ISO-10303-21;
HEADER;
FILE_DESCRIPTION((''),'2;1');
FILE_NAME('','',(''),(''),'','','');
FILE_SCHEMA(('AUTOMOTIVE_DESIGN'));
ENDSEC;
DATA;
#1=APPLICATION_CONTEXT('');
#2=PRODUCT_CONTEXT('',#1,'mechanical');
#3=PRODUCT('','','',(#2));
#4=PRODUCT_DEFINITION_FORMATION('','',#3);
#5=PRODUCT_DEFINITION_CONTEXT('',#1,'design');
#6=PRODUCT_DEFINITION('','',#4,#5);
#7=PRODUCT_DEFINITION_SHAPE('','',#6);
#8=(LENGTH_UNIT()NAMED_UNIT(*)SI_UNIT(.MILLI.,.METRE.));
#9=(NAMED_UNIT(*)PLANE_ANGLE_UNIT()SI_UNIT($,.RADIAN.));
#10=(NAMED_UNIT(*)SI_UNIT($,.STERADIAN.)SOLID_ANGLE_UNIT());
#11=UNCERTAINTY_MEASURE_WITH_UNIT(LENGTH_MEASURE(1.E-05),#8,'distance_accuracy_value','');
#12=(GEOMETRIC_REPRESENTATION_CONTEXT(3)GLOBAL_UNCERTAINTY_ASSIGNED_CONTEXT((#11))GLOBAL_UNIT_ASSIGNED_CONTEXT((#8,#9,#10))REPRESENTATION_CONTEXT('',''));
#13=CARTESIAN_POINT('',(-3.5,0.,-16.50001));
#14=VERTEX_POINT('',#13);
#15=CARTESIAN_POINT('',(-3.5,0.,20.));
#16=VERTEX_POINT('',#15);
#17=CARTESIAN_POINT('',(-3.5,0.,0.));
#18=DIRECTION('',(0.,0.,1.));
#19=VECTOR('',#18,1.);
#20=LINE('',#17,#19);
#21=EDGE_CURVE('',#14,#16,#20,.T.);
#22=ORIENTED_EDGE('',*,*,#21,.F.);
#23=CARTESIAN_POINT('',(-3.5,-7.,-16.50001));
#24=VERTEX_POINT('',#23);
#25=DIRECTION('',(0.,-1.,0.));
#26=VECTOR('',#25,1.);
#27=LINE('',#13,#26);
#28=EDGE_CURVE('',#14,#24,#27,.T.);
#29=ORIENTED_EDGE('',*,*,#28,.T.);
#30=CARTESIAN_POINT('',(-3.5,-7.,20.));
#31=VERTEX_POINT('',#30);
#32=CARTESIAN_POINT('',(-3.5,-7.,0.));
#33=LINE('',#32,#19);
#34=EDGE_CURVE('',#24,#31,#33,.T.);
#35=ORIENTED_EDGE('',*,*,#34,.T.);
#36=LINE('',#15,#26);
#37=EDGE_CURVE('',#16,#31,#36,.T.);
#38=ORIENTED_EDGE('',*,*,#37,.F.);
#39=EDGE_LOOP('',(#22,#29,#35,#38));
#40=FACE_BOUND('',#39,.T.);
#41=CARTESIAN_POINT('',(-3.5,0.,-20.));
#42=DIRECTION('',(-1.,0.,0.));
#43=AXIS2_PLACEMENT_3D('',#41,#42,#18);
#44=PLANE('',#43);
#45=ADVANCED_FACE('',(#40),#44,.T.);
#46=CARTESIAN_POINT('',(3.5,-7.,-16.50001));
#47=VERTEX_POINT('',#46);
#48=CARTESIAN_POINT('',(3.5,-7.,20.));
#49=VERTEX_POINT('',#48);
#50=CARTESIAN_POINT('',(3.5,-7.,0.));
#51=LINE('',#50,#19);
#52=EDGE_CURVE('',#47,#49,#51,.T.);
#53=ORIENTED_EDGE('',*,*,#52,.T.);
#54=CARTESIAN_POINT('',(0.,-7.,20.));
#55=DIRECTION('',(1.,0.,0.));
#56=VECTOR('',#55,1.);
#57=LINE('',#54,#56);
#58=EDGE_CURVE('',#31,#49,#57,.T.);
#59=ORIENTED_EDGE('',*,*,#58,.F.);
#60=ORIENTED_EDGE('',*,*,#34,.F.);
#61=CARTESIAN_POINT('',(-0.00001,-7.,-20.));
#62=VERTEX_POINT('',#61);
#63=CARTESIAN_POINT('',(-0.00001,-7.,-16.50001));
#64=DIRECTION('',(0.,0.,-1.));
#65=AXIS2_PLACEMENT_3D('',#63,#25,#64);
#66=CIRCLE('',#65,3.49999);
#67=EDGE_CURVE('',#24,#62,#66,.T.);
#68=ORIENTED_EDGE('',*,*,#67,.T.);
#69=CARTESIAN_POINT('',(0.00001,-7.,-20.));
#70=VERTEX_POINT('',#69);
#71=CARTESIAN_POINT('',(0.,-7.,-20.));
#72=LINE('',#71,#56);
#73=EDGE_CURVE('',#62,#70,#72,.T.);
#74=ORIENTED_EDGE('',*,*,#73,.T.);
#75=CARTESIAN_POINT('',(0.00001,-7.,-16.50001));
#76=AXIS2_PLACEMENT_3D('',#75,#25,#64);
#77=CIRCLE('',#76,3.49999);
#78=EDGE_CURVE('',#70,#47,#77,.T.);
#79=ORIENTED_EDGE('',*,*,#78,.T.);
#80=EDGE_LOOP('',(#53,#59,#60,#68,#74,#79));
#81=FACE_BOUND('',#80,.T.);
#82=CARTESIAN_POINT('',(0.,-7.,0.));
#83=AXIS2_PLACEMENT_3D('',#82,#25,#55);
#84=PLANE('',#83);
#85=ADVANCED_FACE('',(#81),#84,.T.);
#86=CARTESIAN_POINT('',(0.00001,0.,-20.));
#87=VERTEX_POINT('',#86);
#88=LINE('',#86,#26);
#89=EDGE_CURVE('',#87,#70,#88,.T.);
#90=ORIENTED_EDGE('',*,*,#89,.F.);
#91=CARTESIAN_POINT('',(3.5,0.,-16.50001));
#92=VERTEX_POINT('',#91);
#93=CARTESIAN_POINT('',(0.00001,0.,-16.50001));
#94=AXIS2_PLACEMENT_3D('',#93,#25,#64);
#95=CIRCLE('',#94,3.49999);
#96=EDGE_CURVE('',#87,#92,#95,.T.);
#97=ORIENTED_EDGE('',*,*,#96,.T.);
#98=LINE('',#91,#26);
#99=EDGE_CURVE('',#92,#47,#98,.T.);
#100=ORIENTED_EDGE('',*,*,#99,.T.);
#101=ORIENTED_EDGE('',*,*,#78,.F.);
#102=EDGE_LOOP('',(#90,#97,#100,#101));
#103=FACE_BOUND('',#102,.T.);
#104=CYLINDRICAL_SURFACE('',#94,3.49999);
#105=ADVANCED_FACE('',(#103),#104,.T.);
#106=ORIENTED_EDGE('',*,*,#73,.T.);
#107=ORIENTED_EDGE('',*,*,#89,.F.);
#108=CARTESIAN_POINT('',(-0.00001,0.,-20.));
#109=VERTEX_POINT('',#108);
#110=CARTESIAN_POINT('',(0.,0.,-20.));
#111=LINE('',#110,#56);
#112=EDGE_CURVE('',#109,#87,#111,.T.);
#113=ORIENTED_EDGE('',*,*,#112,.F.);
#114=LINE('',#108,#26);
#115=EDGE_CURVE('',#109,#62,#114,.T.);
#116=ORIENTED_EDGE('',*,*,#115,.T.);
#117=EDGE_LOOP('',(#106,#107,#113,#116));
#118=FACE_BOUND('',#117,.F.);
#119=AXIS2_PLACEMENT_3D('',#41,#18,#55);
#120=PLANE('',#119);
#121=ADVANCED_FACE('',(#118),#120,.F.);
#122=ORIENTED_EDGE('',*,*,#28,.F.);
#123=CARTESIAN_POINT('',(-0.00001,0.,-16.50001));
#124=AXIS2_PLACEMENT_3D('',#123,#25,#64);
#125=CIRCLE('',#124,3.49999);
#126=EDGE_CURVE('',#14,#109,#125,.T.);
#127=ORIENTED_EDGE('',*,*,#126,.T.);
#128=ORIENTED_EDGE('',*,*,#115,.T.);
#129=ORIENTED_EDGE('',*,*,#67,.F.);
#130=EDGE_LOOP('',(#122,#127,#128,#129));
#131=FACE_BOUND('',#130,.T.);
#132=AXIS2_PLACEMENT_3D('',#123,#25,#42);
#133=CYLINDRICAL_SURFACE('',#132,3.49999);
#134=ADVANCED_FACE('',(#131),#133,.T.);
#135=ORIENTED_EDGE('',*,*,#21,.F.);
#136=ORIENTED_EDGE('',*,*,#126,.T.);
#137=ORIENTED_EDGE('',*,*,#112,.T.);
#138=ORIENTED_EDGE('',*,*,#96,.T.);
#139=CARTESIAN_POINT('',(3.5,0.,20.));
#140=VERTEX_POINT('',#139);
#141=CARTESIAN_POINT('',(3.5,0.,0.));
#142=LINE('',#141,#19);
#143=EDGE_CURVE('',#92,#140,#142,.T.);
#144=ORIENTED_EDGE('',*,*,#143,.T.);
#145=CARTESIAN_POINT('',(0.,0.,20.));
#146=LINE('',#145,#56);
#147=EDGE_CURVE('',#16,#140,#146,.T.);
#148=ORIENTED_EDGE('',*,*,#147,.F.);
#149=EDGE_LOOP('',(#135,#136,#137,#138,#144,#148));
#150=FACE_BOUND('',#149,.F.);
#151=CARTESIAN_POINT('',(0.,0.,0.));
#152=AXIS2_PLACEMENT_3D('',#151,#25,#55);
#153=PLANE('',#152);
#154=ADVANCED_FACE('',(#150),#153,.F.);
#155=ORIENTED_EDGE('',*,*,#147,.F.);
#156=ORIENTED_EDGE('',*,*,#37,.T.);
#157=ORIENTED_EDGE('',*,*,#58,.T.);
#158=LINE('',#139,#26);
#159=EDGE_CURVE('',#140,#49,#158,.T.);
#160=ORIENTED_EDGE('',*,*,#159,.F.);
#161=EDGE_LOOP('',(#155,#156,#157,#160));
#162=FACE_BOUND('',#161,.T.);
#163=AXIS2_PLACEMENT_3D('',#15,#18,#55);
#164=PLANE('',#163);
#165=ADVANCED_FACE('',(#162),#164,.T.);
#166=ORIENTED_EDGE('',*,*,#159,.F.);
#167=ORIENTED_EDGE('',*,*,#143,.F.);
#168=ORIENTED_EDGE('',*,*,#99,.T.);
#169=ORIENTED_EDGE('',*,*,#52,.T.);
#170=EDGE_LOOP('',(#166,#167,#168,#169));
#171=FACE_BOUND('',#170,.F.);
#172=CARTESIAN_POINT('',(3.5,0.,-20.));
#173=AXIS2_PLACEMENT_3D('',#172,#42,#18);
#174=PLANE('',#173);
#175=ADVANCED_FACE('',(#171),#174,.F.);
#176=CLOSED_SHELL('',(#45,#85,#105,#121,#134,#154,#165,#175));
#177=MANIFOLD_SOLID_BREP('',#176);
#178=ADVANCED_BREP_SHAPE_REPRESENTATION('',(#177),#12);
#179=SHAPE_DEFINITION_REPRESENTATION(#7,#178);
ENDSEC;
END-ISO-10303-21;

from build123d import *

# Parameters (mm, degrees)
F0_W     = 7
F0_H     = 40
F1_DEPTH = 7
F2_R     = 3.49999


# Not quite as in the source:
# - a fillet or chamfer is up to 0.001 mm smaller than in the source, because OpenCascade refuses the exact size


with BuildPart() as f1:
    # F0 (on Front) → F1 (new body)
    with BuildSketch(Plane.XZ):
        Rectangle(F0_W, F0_H)
    extrude(amount=F1_DEPTH)

    # F2 (radius 3.5 in the source; OpenCascade refuses exactly that, so slightly less here)
    f2_edges = [f1.edges().sort_by_distance(p)[0] for p in [
        (3.5, -3.5, -20),
        (-3.5, -3.5, -20),
    ]]
    fillet(f2_edges, radius=F2_R)


solid = f1.part
